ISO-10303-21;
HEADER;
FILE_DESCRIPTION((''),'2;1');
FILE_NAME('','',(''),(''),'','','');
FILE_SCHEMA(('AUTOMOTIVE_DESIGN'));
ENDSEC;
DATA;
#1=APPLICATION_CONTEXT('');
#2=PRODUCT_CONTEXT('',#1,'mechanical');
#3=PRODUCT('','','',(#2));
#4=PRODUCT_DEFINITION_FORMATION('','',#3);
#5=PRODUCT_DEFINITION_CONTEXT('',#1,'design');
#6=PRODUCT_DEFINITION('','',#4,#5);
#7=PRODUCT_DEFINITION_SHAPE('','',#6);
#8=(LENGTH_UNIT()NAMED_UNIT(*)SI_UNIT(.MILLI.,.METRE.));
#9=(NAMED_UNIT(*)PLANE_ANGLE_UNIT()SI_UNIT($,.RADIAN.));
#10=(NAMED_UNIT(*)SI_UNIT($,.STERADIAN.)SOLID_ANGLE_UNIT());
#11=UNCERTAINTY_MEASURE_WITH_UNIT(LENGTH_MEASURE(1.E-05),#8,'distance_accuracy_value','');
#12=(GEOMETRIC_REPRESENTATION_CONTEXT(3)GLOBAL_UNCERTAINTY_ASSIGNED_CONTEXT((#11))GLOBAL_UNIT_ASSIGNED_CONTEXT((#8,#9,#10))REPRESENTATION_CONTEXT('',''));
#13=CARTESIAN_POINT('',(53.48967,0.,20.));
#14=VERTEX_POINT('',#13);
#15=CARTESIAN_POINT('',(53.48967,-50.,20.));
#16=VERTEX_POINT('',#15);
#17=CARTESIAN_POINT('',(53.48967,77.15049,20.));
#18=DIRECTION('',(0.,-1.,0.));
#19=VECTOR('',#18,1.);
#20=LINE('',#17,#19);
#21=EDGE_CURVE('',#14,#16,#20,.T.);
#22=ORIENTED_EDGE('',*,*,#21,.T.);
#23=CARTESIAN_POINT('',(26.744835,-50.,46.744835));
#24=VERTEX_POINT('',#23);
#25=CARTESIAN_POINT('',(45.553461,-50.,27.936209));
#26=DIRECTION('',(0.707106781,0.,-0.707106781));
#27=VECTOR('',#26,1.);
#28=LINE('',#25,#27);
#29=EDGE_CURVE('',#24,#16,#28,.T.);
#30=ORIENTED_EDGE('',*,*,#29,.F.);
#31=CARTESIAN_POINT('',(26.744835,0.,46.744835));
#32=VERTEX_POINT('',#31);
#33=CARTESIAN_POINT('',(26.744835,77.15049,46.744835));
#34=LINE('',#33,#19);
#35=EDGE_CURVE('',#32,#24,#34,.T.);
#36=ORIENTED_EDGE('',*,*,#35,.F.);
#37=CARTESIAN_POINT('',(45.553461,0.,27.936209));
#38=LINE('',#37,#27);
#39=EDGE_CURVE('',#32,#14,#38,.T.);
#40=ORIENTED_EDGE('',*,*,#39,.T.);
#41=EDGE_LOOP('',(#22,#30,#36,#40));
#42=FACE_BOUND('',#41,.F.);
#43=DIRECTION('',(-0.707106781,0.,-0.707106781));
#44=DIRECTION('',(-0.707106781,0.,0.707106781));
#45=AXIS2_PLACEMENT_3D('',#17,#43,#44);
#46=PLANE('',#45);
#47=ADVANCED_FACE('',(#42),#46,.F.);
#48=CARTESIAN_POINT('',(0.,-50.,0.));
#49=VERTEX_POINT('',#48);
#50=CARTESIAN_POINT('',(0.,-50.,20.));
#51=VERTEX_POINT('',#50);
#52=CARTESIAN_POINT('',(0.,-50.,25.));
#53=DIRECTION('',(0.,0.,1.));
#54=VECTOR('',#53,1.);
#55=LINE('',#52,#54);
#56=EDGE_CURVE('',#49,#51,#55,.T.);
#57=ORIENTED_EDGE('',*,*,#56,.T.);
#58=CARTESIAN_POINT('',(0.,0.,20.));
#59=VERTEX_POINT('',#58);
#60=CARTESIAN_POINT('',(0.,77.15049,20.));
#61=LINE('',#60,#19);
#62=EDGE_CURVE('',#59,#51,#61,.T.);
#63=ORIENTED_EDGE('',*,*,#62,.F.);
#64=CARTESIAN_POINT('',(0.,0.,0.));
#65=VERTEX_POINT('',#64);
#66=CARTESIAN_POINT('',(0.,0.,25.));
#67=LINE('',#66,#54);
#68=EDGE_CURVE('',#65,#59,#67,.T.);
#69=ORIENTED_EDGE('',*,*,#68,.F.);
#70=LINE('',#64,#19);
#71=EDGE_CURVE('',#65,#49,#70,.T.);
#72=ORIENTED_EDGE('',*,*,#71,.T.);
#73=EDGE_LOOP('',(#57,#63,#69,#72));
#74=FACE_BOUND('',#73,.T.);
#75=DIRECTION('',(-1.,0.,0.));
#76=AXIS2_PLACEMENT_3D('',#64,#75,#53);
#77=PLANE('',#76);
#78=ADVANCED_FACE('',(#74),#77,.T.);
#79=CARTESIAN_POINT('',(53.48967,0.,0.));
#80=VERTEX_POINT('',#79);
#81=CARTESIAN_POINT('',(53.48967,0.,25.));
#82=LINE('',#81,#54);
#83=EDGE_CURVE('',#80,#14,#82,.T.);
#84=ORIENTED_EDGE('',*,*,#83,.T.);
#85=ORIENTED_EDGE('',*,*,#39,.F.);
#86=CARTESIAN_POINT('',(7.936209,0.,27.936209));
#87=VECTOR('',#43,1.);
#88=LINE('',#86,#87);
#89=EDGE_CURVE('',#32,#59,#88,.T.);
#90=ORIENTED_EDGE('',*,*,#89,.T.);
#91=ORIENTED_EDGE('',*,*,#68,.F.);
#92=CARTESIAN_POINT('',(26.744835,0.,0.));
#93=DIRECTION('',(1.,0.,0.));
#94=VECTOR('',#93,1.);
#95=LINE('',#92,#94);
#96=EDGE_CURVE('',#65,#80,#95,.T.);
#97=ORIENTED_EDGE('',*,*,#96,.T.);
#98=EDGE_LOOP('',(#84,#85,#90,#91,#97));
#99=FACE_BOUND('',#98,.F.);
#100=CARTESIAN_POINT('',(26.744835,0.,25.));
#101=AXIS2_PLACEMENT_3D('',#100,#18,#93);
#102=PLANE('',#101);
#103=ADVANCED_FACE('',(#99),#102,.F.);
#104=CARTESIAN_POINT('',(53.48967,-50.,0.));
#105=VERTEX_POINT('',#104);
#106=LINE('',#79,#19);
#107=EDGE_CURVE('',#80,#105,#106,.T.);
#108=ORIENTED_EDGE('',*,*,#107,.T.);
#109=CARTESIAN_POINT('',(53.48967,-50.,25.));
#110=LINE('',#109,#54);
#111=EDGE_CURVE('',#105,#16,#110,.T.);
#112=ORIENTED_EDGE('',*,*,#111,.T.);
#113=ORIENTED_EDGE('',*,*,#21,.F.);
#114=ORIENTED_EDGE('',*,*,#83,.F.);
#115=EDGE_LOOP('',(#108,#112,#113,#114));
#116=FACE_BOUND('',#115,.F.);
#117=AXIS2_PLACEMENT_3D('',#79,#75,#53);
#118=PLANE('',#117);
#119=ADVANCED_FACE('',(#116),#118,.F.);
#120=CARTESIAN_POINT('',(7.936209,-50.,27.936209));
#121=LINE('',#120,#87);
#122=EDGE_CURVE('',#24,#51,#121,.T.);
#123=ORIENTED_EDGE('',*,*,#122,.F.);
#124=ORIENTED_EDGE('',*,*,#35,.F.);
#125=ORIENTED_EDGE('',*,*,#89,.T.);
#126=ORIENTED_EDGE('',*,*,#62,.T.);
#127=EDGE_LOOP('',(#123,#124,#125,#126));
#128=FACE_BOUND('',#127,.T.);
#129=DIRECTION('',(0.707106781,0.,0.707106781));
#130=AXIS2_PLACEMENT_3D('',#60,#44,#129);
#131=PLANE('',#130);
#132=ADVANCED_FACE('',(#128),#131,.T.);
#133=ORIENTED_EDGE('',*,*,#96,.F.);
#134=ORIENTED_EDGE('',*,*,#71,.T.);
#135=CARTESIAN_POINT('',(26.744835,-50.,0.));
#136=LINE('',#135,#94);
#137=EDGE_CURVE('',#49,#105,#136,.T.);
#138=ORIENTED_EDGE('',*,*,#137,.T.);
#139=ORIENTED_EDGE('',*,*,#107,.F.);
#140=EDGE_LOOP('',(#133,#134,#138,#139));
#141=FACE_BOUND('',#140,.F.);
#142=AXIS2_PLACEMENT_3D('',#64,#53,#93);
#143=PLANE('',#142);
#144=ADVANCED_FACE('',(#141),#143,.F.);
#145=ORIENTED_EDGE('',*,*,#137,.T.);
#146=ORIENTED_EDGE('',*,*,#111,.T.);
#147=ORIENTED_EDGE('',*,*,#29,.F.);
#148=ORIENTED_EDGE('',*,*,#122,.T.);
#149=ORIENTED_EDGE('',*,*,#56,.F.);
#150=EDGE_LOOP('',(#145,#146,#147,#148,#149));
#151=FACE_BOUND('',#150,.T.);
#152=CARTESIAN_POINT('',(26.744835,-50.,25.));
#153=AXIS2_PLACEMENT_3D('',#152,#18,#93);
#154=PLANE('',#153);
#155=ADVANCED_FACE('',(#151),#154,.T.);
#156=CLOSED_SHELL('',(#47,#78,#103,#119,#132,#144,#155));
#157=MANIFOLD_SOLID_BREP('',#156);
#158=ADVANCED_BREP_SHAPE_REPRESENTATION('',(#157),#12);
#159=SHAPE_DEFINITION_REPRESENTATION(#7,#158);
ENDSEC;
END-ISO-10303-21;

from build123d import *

# Parameters (mm, degrees)
F0_W        = 53.4896697645
F0_H        = 50
F1_DEPTH    = 50
F2_T1_DEPTH = 204.300979278


# Not quite as in the source:
# - a fillet or chamfer that OpenCascade refuses, or shapes differently, is made with other operations: its cross-section is extruded or revolved along the edge and cut away or added


with BuildPart() as f1:
    # F0 (on Front) → F1 (new body)
    with BuildSketch(Plane.XZ):
        with Locations((26.7448348823, 25)):
            Rectangle(F0_W, F0_H)
    extrude(amount=F1_DEPTH)

    # F2: chamfer of 30 on 2 edges, made by hand

    # F2_s2 → F2_t1 (cut)
    with BuildSketch(Plane.XZ.offset(-77.150489639)):
        Polygon((53.4896697645, 20), (23.4896697645, 50), (53.4896697645, 50), align=None)
        Polygon((0, 20), (30, 50), (0, 50), align=None)
    extrude(amount=F2_T1_DEPTH, mode=Mode.SUBTRACT)


solid = f1.part
